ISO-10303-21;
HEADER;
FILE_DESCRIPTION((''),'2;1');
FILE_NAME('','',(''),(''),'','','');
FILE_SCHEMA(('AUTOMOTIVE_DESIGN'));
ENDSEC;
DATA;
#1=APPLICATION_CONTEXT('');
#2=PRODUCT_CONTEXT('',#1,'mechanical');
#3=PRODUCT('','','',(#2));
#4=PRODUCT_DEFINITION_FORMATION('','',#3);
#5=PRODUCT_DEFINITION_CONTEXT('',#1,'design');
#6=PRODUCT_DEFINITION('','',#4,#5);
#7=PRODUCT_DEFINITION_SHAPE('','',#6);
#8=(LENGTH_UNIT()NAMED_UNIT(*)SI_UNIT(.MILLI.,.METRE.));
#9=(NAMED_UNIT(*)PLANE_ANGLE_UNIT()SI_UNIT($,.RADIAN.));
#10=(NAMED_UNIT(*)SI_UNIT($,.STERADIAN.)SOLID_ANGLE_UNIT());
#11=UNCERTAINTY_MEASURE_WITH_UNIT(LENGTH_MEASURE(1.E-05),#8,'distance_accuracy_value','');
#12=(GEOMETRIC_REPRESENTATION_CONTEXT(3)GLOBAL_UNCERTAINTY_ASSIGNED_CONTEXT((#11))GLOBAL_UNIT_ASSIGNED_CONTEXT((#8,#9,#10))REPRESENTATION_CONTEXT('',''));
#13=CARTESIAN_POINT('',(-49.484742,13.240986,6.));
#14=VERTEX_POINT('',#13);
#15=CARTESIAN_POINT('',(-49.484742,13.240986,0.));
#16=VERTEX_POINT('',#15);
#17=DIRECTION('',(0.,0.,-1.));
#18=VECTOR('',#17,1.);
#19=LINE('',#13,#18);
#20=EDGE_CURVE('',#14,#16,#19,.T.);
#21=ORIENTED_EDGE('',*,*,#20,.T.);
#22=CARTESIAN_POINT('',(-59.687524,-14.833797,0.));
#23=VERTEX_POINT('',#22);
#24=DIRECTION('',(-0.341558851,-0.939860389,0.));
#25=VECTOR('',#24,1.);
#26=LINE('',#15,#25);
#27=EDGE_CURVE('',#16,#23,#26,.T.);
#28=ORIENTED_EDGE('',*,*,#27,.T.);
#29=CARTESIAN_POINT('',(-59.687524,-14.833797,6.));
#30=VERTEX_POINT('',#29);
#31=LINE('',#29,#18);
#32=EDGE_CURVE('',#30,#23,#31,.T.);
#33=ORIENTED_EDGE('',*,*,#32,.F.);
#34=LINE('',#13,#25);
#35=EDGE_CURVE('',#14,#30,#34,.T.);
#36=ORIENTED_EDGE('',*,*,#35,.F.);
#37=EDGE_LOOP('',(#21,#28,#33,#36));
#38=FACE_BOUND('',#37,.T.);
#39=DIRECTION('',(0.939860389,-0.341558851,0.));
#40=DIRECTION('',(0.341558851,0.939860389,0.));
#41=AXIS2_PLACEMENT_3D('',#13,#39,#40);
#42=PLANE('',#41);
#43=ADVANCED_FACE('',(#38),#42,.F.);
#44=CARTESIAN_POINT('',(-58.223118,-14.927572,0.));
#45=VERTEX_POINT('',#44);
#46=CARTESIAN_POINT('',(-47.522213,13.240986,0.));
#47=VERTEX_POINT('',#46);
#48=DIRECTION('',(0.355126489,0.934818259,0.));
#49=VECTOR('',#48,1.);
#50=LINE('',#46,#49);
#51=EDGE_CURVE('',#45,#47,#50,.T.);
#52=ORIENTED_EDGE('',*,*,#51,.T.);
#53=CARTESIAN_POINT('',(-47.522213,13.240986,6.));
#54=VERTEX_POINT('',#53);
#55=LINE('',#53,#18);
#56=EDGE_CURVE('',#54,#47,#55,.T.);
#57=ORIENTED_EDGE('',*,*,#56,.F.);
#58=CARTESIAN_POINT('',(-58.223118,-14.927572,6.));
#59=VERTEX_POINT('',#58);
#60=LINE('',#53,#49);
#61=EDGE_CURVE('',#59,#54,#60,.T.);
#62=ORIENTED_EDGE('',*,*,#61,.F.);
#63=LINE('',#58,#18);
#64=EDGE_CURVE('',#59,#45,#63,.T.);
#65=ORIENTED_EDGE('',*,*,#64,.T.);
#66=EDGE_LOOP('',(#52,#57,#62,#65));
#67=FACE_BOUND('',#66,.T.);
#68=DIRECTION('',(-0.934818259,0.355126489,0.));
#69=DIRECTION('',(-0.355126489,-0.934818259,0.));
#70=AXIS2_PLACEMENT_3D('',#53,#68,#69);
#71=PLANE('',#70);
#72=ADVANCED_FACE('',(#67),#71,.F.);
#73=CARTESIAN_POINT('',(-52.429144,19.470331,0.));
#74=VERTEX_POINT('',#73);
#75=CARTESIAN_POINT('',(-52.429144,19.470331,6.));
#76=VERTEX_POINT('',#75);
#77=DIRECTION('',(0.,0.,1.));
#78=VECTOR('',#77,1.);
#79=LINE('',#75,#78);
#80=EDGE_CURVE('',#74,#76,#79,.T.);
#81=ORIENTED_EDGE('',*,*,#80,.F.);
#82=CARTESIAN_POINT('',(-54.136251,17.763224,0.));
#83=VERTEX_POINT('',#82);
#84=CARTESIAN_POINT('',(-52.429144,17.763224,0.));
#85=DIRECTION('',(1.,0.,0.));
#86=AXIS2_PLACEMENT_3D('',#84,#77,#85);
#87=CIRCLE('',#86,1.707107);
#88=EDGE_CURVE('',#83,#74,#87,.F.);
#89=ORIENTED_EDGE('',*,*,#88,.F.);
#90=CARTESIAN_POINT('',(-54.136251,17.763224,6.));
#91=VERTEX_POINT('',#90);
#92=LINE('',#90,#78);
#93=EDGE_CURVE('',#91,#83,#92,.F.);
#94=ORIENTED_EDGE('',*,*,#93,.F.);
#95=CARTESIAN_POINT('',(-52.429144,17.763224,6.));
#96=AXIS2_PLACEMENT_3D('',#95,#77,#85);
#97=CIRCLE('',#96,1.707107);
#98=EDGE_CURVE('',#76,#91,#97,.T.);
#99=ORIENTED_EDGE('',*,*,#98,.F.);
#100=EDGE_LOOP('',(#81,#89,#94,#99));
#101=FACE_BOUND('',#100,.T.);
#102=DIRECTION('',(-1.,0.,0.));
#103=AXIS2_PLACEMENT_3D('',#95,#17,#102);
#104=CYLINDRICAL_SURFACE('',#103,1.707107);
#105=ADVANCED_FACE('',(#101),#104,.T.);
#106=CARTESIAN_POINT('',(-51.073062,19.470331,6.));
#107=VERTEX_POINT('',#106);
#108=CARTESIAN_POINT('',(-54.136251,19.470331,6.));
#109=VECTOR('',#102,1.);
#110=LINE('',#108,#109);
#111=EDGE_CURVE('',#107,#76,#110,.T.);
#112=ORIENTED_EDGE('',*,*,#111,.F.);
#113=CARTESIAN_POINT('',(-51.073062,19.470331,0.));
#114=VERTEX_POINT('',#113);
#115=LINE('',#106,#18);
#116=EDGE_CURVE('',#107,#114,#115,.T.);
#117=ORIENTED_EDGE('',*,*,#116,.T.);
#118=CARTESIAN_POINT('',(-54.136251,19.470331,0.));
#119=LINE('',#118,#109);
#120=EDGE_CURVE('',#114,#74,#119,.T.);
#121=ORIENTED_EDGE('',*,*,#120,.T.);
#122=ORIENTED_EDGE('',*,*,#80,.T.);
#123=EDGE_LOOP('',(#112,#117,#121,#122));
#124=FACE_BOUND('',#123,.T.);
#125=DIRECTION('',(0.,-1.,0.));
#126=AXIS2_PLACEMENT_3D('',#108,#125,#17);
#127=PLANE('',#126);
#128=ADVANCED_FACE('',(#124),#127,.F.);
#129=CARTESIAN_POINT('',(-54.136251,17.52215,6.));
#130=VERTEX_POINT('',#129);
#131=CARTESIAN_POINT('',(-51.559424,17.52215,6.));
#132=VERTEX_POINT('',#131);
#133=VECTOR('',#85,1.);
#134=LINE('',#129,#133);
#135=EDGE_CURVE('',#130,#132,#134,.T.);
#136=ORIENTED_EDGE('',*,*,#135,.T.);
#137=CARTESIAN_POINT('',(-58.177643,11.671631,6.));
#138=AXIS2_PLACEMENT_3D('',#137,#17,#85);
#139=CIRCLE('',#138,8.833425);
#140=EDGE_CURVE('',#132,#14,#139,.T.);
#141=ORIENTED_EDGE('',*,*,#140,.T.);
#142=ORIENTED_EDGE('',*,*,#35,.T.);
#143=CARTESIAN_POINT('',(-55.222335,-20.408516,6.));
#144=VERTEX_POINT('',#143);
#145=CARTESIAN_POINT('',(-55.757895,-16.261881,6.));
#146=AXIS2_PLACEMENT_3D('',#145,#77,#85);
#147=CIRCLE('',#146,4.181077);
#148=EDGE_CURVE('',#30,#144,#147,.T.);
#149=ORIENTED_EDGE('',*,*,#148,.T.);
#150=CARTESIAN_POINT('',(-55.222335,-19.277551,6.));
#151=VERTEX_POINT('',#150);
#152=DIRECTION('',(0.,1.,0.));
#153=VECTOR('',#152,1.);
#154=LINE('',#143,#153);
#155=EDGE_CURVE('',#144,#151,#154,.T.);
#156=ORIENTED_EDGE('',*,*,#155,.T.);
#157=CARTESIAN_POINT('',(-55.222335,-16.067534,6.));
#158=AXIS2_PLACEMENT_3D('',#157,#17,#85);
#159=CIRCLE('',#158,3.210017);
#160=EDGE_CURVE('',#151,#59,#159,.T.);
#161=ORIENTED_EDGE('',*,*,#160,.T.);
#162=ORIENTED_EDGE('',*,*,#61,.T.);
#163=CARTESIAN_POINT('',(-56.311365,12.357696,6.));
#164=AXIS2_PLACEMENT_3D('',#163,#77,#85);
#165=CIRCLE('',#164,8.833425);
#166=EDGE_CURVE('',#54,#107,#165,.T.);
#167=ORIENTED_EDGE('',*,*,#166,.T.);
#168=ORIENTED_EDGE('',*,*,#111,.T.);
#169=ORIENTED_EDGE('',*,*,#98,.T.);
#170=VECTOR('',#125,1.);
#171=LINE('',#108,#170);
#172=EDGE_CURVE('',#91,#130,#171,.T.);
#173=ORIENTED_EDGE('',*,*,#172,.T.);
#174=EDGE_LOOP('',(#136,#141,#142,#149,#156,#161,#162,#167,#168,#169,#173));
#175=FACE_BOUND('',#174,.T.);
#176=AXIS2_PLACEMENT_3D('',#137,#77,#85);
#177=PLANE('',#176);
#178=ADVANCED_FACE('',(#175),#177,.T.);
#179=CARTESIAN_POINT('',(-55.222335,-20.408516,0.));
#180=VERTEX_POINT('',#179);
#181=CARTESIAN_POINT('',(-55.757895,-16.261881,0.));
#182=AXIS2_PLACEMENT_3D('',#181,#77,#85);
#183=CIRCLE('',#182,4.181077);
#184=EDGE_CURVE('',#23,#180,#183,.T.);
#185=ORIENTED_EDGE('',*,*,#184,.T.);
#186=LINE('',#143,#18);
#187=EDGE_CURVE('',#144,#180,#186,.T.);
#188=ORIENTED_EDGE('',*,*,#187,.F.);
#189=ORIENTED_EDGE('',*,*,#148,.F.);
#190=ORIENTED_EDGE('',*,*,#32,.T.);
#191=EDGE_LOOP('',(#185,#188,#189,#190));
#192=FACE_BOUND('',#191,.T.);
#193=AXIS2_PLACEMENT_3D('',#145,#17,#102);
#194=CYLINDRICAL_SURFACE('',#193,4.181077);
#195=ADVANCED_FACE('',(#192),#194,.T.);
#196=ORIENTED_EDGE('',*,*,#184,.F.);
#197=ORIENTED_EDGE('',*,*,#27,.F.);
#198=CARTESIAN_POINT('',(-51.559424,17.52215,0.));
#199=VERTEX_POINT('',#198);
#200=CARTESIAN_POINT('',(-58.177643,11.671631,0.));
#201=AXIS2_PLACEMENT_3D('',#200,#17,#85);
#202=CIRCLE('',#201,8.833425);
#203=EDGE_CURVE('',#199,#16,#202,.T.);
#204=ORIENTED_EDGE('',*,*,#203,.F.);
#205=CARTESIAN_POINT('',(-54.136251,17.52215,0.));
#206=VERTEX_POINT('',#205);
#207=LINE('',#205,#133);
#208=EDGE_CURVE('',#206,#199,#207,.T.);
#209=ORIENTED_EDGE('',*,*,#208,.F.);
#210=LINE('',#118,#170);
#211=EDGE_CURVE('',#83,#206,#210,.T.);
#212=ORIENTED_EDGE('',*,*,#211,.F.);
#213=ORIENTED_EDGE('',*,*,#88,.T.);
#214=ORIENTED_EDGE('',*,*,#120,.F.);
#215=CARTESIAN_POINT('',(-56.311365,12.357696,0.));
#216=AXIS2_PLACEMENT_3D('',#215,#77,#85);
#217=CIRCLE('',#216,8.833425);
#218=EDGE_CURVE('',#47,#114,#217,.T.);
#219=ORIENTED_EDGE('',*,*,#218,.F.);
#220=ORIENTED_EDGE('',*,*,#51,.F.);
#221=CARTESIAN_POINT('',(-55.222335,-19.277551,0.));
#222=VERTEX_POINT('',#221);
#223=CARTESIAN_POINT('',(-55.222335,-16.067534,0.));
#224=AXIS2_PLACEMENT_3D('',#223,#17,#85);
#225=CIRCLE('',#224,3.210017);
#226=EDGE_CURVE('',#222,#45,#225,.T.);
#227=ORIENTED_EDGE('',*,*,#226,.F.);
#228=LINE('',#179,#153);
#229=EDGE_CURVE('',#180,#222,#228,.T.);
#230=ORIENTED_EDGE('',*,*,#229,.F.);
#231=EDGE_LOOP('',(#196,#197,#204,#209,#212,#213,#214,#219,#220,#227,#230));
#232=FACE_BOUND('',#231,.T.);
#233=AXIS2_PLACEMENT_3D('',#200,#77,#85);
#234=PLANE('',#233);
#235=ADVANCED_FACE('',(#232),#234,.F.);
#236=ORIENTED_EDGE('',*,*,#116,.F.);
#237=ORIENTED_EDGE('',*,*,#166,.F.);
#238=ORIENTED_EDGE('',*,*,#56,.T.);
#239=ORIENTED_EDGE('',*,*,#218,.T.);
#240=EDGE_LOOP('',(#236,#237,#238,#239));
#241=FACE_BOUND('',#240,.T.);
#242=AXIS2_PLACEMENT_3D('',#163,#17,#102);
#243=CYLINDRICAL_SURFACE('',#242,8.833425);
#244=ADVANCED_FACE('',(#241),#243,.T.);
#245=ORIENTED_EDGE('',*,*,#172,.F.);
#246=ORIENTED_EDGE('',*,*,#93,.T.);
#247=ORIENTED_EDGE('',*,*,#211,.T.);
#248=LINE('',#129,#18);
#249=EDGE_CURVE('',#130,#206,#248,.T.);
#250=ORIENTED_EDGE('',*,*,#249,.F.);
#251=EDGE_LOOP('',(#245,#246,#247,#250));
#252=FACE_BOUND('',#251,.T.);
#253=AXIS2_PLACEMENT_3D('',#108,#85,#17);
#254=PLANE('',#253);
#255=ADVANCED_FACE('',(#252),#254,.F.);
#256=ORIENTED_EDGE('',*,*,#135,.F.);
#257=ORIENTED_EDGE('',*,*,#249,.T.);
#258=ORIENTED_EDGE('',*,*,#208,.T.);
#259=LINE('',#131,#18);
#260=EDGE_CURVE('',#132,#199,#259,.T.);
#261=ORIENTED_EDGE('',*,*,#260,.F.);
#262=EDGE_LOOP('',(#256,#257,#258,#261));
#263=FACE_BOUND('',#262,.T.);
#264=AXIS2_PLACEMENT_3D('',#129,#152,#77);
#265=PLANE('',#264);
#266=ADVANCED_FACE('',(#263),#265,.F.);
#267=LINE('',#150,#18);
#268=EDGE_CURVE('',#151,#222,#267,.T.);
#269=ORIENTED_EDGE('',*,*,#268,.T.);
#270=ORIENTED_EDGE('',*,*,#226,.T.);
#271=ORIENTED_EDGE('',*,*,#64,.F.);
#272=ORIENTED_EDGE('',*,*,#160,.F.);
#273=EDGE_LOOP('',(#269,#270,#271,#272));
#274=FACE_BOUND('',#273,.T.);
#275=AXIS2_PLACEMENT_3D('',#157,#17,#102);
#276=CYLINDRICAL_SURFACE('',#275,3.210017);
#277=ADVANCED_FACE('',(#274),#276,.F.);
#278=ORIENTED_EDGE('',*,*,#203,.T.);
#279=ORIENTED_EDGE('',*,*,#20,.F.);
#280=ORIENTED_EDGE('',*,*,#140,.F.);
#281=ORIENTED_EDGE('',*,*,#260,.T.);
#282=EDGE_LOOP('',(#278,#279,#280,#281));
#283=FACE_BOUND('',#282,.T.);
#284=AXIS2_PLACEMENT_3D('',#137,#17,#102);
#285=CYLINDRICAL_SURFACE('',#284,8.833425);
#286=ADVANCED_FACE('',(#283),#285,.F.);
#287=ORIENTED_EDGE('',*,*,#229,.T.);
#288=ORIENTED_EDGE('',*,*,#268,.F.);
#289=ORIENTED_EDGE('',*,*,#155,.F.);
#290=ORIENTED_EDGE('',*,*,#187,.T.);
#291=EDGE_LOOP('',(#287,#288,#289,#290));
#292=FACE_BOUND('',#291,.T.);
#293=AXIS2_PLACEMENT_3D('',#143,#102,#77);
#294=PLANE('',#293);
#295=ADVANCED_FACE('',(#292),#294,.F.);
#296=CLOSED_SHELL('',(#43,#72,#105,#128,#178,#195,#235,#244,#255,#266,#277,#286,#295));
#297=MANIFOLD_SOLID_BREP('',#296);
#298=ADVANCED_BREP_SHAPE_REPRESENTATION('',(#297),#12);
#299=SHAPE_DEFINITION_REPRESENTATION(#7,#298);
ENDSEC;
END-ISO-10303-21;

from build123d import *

# Parameters (mm, degrees)
ESTRUSIONE_ESTRUSIONE2_DEPTH = 6
SMUSSO1_SIZE                 = 1
RACCORDO5_R                  = 1.707107


# Read off the part's stored shape, not the designer's step: Estrusione-Estrusione2
with BuildPart() as part:
    # Estrusione-Estrusione2 outline → Estrusione-Estrusione2 (new body)
    with BuildSketch(Plane.XY):
        with BuildLine():
            Line((-54.136250947, 19.470330923), (-54.136250947, 17.522149798))
            Line((-54.136250947, 17.522149798), (-51.559423685, 17.522149798))
            ThreePointArc((-51.559423685, 17.522149798), (-50.228448587, 15.523864916), (-49.484742197, 13.240985597))
            Line((-49.484742197, 13.240985597), (-59.687524076, -14.833797153))
            ThreePointArc((-59.687524076, -14.833797153), (-59.02122155, -18.875711178), (-55.222335236, -20.408516065))
            Line((-55.222335236, -20.408516065), (-55.222335236, -19.277551448))
            ThreePointArc((-55.222335236, -19.277551448), (-57.864636062, -17.890294899), (-58.223117797, -14.927572295))
            Line((-58.223117797, -14.927572295), (-47.522213123, 13.240985597))
            ThreePointArc((-47.522213123, 13.240985597), (-48.637151321, 16.732148519), (-51.073062414, 19.470330923))
            Line((-51.073062414, 19.470330923), (-54.136250947, 19.470330923))
        make_face()
    extrude(amount=ESTRUSIONE_ESTRUSIONE2_DEPTH)

    # Smusso1
    smusso1_edges = [part.edges().sort_by_distance(p)[0] for p in [
        (-54.136250947, 19.470330923, 3),
    ]]
    chamfer(smusso1_edges, length=SMUSSO1_SIZE)

    # Raccordo5
    raccordo5_edges = [part.edges().sort_by_distance(p)[0] for p in [
        (-54.136250947, 18.470330923, 3),
        (-53.136250947, 19.470330923, 3),
    ]]
    fillet(raccordo5_edges, radius=RACCORDO5_R - 0.0001)  # a hair under: the kernel refuses the full size


solid = part.part
